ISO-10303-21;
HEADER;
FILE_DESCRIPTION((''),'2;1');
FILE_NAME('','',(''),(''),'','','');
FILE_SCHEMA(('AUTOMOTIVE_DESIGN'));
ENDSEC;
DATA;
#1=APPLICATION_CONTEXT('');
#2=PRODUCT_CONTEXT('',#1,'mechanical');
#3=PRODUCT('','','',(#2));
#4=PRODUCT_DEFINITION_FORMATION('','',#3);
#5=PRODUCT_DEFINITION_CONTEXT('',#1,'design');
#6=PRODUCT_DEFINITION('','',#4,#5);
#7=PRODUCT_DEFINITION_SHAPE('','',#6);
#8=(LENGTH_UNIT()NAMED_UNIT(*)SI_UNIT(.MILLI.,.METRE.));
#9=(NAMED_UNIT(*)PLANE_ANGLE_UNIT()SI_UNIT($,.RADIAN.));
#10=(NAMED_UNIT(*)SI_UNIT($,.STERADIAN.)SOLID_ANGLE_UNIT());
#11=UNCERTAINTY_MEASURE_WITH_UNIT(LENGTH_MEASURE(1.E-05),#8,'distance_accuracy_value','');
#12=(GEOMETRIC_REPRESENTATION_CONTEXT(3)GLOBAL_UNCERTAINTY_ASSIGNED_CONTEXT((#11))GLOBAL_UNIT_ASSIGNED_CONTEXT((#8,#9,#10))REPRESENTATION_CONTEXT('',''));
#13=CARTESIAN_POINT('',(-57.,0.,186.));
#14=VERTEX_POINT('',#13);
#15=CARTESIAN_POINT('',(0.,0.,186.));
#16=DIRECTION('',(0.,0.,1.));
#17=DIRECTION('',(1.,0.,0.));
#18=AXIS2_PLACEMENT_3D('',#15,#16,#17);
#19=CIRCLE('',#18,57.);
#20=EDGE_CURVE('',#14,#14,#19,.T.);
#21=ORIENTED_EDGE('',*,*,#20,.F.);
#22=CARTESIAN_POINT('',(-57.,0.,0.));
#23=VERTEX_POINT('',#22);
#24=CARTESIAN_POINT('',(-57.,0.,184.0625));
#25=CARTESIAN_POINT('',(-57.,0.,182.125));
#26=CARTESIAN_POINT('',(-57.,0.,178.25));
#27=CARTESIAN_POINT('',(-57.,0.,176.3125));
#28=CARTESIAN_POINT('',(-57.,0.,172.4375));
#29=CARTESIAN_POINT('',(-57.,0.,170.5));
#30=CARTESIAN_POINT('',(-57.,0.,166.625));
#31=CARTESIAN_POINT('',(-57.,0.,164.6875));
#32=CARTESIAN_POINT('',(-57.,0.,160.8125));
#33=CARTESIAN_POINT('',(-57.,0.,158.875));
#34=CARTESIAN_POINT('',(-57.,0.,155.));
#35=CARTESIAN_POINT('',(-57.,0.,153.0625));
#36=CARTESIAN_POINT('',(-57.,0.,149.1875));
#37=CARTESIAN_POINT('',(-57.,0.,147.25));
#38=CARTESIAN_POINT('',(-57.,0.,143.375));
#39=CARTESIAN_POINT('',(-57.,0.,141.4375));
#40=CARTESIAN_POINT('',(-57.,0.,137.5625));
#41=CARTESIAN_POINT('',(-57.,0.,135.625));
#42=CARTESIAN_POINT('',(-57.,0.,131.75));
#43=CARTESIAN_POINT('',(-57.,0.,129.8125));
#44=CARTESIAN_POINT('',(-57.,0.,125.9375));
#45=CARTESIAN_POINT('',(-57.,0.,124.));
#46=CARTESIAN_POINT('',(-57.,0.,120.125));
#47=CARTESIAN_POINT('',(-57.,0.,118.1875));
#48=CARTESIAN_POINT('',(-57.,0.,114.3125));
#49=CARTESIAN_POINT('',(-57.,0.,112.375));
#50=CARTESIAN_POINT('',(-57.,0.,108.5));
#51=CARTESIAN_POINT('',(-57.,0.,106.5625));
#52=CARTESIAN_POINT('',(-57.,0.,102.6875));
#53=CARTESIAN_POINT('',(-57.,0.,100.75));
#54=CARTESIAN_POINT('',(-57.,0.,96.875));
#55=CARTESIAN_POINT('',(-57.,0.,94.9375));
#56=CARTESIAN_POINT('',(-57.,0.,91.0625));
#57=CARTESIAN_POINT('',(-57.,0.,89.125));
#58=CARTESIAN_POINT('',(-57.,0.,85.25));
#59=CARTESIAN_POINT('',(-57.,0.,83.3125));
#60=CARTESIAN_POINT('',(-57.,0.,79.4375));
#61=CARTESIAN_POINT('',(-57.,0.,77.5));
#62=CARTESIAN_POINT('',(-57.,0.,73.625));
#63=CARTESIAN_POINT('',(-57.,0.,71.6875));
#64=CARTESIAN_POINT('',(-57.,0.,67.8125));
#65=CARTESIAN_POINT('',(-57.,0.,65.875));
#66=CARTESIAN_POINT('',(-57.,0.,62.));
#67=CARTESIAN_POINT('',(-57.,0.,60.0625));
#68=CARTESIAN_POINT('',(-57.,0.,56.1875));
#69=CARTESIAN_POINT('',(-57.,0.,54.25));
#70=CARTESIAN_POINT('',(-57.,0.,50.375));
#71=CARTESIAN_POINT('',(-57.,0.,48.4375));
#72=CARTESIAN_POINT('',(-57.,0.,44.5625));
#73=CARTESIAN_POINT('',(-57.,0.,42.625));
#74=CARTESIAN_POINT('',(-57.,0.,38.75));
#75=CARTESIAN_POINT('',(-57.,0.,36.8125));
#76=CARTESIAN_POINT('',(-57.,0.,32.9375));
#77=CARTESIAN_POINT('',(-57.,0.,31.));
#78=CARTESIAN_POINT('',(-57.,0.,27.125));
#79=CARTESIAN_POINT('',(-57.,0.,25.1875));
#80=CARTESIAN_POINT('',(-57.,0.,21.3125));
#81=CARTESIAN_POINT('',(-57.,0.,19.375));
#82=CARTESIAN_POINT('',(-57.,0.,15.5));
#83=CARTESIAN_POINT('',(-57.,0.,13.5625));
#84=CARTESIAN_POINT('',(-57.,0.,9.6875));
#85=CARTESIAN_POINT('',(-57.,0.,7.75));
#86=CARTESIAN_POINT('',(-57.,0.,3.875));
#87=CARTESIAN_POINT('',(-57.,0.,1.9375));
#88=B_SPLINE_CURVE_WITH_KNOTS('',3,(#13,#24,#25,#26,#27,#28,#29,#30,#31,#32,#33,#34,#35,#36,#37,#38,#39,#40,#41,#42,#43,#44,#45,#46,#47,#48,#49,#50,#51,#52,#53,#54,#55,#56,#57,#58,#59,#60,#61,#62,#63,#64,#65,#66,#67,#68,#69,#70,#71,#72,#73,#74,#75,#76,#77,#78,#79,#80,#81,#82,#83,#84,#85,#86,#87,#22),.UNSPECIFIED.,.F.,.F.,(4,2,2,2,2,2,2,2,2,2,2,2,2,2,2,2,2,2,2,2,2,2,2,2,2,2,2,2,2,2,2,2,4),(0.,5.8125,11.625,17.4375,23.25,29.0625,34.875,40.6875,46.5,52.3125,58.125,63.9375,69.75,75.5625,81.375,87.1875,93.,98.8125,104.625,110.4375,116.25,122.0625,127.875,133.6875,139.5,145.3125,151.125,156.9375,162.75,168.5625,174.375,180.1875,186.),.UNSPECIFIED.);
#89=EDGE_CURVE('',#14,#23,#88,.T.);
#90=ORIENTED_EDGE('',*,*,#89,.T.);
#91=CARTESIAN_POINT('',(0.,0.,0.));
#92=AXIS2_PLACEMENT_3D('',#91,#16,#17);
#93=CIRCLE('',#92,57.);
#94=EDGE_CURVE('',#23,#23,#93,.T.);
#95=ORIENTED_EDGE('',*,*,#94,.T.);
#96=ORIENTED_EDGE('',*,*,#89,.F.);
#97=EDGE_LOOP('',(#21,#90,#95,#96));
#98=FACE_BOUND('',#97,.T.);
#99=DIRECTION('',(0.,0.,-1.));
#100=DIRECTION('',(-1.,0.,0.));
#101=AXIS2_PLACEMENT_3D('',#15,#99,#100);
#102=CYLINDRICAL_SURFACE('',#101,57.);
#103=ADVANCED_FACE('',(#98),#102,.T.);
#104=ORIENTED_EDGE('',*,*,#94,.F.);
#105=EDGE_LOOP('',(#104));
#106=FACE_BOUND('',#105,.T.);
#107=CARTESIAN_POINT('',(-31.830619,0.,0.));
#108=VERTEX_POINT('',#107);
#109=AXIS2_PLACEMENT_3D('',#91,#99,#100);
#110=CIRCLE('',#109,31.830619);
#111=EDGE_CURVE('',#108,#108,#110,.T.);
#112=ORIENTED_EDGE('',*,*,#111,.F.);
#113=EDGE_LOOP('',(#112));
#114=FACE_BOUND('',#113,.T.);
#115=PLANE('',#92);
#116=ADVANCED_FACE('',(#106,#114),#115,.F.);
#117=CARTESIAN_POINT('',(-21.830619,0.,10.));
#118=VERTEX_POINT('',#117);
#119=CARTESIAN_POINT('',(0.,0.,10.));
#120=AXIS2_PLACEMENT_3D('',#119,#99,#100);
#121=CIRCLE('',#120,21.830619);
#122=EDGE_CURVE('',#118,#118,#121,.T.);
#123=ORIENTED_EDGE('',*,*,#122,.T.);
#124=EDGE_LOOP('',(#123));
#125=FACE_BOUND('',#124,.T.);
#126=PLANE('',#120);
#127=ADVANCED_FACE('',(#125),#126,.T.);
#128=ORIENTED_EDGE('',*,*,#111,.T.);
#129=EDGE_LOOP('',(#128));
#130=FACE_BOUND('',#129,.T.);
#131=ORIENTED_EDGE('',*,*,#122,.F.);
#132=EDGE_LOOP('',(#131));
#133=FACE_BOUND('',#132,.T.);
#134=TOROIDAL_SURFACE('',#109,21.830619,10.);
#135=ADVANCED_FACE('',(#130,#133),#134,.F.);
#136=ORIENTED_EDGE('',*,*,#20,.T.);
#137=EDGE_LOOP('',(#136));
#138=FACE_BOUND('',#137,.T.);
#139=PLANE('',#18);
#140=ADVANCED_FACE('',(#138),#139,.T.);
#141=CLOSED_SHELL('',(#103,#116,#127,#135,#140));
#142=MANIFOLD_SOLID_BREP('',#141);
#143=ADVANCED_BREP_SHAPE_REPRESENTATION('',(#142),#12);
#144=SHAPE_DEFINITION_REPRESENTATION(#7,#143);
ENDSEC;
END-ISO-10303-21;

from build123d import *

# Parameters (mm, degrees)
SKETCH1_R           = 57
BOSS_EXTRUDE1_DEPTH = 186
SKETCH2_R           = 31.83061868
CUT_EXTRUDE1_DEPTH  = 10
FILLET1_R           = 10


with BuildPart() as part:
    # Sketch1 → Boss-Extrude1 (new body)
    with BuildSketch(Plane.XY):
        with Locations(Location((0, 0, 0), (0, 0, 180))):
            Circle(SKETCH1_R)
    extrude(amount=BOSS_EXTRUDE1_DEPTH)

    # Sketch2 → Cut-Extrude1 (cut)
    with BuildSketch(Plane(origin=(0, 0, 0), x_dir=(-1, 0, 0), z_dir=(0, 0, -1))):
        Circle(SKETCH2_R)
    extrude(amount=-CUT_EXTRUDE1_DEPTH, mode=Mode.SUBTRACT)

    # Fillet1
    fillet1_edges = [part.edges().sort_by_distance(p)[0] for p in [
        (31.83061868, 0, 10),
    ]]
    fillet(fillet1_edges, radius=FILLET1_R - 0.0001)  # a hair under: the kernel refuses the full size


solid = part.part
